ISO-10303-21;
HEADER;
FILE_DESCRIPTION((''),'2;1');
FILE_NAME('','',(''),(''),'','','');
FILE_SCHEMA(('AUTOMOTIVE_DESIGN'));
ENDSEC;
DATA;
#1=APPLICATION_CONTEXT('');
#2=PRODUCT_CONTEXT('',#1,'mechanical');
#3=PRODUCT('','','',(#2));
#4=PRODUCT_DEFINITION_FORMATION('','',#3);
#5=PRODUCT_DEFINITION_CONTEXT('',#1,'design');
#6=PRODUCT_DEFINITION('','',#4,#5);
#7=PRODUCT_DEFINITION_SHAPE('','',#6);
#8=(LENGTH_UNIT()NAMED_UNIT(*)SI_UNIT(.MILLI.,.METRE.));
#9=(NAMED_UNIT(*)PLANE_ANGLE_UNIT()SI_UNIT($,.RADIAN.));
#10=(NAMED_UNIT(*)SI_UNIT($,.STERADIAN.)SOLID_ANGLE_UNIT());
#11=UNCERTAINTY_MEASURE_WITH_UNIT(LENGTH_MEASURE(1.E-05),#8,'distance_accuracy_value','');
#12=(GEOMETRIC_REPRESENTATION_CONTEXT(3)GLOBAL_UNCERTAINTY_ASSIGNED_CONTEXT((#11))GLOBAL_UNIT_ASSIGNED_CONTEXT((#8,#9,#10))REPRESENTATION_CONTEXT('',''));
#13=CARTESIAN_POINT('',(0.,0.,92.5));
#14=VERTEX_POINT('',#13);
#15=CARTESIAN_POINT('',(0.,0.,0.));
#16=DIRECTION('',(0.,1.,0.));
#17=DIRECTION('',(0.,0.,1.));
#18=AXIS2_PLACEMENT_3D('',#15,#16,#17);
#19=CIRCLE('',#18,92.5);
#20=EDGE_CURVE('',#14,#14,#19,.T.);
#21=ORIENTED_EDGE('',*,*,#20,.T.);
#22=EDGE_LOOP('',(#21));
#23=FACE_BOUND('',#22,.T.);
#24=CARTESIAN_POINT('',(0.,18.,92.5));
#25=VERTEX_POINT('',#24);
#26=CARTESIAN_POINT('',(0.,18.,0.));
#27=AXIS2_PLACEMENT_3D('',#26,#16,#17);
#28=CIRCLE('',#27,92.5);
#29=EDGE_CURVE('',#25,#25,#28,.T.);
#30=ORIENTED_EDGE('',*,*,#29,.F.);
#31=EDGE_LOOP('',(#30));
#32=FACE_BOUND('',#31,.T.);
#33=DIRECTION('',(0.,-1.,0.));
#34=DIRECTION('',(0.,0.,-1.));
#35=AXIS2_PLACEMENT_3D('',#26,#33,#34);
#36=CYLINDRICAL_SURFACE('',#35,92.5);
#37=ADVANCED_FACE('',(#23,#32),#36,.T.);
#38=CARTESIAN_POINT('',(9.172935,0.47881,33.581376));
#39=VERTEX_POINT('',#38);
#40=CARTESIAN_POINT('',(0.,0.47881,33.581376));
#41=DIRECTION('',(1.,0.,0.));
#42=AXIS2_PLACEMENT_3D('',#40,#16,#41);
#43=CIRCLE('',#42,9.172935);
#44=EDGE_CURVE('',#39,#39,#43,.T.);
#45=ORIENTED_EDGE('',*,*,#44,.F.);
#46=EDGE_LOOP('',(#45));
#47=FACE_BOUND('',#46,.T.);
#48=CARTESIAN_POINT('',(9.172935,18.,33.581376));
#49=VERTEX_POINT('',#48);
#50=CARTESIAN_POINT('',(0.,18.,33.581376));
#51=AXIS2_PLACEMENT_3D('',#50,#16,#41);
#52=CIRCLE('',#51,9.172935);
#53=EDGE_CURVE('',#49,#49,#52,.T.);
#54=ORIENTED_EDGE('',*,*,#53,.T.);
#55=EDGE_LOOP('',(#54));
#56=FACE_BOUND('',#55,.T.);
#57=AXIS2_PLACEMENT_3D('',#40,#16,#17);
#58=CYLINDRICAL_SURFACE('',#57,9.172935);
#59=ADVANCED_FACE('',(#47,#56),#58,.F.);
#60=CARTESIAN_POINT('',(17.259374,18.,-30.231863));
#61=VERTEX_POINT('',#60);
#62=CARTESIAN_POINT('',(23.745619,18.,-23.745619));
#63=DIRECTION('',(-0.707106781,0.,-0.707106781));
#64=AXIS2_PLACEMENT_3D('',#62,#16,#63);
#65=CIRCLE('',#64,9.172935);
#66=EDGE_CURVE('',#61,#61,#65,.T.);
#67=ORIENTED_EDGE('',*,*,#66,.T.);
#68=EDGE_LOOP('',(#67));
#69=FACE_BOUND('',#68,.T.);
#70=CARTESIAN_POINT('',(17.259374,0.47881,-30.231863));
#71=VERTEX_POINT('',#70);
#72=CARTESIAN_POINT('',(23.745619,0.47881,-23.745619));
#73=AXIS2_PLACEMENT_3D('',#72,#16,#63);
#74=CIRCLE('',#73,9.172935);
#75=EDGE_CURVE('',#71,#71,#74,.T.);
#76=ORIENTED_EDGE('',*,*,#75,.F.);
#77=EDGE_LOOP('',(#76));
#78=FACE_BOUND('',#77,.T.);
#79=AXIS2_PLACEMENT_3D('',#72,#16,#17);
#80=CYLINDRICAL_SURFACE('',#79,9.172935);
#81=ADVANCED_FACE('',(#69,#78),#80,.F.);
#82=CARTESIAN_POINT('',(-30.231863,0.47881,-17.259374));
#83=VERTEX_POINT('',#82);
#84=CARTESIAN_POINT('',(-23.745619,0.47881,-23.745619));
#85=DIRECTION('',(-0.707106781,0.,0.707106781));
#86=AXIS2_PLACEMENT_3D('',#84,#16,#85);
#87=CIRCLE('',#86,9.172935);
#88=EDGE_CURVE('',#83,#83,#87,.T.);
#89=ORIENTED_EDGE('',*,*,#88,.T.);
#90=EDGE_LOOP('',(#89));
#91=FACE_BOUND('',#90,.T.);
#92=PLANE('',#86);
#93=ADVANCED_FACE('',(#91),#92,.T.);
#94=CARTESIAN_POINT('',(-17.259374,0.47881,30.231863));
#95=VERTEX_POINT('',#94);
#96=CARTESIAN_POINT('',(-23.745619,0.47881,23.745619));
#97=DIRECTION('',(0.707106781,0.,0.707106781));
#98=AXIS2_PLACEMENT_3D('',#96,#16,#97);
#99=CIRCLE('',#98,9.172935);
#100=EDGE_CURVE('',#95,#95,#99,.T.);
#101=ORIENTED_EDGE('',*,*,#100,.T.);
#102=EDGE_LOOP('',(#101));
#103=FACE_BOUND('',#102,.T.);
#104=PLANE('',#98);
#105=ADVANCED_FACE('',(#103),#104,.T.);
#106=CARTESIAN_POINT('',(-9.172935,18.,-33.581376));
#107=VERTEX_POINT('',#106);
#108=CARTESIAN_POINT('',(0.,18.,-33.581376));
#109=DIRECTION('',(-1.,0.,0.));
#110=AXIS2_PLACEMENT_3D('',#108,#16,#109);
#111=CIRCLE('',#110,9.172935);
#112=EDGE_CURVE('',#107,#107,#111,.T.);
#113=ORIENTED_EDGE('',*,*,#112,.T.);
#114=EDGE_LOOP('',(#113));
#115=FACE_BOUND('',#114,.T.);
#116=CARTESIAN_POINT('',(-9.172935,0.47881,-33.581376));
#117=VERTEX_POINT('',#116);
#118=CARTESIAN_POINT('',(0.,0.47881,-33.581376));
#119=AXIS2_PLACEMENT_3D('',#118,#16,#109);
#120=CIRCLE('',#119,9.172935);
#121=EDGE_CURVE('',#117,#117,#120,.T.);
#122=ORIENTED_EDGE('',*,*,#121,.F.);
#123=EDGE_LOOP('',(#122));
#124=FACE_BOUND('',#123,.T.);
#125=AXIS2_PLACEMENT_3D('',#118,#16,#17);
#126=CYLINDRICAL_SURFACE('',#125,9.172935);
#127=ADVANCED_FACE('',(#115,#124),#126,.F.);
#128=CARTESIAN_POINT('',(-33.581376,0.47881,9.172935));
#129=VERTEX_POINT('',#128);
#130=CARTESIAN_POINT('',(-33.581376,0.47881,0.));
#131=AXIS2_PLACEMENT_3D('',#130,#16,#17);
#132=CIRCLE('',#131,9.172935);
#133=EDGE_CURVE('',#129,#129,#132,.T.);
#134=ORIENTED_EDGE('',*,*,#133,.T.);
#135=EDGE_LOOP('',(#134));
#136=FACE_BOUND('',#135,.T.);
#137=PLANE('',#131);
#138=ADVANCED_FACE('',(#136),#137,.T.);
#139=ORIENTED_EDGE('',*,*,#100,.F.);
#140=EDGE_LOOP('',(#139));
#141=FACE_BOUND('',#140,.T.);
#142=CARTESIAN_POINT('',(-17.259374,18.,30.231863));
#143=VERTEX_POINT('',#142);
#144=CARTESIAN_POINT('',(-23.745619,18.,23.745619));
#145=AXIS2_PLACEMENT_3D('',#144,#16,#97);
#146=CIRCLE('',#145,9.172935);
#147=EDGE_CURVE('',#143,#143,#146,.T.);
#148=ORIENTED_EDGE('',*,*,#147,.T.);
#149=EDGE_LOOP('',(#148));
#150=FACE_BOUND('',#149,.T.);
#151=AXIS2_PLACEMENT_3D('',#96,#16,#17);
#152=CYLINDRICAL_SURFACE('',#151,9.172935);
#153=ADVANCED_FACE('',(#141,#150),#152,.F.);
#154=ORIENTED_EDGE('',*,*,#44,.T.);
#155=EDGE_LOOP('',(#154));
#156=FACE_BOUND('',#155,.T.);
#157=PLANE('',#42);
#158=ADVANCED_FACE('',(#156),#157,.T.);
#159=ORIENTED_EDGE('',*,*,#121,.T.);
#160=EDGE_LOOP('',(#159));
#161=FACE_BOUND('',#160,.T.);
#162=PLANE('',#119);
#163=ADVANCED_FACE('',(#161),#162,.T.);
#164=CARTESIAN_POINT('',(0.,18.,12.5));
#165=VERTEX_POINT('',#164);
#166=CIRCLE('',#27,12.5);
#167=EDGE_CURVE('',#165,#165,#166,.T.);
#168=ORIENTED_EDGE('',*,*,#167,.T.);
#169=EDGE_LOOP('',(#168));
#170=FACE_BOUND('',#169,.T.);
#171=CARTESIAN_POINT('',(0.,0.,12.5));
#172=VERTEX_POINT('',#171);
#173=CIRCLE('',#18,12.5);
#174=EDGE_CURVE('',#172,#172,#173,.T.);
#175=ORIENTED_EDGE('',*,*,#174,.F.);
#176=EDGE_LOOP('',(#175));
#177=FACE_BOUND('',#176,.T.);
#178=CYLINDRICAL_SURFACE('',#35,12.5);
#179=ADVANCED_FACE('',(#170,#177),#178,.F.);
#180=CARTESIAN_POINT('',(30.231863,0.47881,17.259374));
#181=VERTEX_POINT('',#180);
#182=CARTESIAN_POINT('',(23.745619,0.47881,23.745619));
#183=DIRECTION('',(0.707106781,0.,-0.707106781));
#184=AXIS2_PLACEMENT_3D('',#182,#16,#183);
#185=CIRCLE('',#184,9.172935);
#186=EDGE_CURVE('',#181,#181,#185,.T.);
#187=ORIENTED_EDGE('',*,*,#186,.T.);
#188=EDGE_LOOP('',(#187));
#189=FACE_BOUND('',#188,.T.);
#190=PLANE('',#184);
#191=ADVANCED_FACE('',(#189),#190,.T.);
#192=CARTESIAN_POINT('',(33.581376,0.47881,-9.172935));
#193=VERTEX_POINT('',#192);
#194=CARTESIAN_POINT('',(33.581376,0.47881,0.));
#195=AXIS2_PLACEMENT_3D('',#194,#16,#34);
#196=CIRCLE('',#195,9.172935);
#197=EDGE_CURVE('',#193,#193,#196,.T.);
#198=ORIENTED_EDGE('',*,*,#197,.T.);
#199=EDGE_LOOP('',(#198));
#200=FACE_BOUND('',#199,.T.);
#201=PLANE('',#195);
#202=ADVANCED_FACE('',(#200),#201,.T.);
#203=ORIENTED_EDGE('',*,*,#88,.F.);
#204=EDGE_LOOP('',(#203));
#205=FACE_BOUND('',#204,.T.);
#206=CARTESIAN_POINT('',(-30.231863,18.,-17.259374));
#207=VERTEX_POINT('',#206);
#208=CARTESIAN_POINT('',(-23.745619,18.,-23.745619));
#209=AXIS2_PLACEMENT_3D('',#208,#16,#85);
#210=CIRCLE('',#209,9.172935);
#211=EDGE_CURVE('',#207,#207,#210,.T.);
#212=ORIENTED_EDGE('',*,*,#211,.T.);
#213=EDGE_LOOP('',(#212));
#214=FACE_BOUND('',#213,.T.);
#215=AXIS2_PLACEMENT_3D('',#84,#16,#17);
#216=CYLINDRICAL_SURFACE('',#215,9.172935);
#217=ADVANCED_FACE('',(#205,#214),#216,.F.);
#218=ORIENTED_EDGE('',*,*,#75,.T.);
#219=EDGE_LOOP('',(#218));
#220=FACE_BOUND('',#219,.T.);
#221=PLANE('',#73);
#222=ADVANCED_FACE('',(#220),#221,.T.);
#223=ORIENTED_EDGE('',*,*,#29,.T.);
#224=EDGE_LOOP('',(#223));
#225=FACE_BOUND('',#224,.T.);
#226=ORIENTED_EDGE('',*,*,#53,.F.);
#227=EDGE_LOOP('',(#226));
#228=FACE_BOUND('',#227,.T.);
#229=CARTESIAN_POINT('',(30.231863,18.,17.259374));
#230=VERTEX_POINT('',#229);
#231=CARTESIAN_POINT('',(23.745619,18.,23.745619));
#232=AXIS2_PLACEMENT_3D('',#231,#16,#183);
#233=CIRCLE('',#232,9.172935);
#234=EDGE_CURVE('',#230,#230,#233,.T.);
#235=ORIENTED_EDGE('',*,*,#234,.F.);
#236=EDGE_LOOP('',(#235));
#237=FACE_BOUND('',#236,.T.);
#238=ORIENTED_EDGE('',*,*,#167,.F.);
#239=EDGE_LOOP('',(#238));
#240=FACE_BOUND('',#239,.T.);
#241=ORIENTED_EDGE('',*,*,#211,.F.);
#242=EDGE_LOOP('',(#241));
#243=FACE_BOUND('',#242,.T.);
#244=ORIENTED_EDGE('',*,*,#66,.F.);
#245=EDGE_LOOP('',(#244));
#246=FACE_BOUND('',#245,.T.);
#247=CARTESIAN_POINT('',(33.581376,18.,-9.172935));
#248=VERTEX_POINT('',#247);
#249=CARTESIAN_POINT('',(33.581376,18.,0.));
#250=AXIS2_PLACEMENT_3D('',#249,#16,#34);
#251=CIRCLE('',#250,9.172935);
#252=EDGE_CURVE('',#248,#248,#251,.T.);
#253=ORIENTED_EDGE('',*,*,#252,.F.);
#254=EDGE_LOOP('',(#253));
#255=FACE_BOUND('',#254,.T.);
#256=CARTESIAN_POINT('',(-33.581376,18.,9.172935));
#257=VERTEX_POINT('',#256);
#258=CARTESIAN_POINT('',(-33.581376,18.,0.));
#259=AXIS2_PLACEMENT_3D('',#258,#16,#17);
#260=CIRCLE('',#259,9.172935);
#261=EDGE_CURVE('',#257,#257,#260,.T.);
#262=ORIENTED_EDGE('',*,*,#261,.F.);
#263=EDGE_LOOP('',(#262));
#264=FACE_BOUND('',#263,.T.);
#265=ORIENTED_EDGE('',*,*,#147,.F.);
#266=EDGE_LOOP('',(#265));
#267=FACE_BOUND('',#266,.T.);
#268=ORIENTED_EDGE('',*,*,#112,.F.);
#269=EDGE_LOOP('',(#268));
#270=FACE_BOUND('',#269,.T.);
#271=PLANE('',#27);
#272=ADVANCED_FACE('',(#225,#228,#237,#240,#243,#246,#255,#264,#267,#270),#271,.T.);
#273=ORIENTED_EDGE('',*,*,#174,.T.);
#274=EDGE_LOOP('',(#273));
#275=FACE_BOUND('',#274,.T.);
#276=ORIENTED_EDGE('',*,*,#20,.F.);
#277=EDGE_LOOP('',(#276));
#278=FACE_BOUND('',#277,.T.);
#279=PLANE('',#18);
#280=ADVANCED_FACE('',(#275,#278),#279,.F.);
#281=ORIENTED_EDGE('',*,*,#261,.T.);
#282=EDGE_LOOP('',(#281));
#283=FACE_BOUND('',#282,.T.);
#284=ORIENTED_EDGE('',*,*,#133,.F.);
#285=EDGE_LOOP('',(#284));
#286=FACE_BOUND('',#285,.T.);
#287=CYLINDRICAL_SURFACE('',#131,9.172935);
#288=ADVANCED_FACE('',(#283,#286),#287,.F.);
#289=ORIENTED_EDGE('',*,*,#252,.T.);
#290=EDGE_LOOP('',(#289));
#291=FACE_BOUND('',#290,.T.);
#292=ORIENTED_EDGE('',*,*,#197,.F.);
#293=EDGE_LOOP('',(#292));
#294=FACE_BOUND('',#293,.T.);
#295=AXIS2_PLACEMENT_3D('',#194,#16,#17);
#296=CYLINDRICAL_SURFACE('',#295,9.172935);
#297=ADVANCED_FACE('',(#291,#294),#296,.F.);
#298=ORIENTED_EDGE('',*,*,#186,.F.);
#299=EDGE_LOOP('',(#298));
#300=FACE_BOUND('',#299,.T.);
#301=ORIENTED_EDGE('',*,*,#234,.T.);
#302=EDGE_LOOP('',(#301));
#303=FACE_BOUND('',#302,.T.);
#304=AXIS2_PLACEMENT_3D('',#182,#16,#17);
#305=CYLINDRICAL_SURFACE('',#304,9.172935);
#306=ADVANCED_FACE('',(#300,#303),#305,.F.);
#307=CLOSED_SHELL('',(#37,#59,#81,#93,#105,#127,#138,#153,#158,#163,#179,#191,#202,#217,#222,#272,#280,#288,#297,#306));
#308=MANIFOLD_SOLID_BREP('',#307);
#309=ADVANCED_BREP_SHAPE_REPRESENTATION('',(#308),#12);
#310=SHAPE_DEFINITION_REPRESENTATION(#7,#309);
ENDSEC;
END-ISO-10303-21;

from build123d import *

# Parameters (mm, degrees)
SKETCH1_R           = 92.5
BOSS_EXTRUDE1_DEPTH = 18
SKETCH2_R           = 12.5
CUT_EXTRUDE1_DEPTH  = 133.047339996
SKETCH3_R           = 9.172934827
CUT_EXTRUDE2_DEPTH  = 17.521190371
CIRPATTERN1_COUNT   = 8


with BuildPart() as part:
    # Sketch1 → Boss-Extrude1 (new body)
    with BuildSketch(Plane(origin=(0, 0, 0), x_dir=(1, 0, 0), z_dir=(0, 1, 0))):
        Circle(SKETCH1_R)
    extrude(amount=BOSS_EXTRUDE1_DEPTH)

    # Sketch2 → Cut-Extrude1 (cut, through all)
    with BuildSketch(Plane(origin=(0, 0, 0), x_dir=(1, 0, 0), z_dir=(0, 1, 0))):
        Circle(SKETCH2_R)
    extrude(amount=CUT_EXTRUDE1_DEPTH, mode=Mode.SUBTRACT)

    # Sketch3 → Cut-Extrude2 (cut)
    with BuildSketch(Plane(origin=(0, 18, 0), x_dir=(1, 0, 0), z_dir=(0, 1, 0))):
        with Locations((-33.581375972, 0)):
            Circle(SKETCH3_R)
    cut_extrude2 = extrude(amount=-CUT_EXTRUDE2_DEPTH, mode=Mode.SUBTRACT)

    # CirPattern1: Cut-Extrude2 ×8 about axis
    cirpattern1_axis = Axis((0, 0, 0), (0, 1, 0))
    for i in range(1, CIRPATTERN1_COUNT):
        add(cut_extrude2.rotate(cirpattern1_axis, i * 360 / CIRPATTERN1_COUNT), mode=Mode.SUBTRACT)


solid = part.part
